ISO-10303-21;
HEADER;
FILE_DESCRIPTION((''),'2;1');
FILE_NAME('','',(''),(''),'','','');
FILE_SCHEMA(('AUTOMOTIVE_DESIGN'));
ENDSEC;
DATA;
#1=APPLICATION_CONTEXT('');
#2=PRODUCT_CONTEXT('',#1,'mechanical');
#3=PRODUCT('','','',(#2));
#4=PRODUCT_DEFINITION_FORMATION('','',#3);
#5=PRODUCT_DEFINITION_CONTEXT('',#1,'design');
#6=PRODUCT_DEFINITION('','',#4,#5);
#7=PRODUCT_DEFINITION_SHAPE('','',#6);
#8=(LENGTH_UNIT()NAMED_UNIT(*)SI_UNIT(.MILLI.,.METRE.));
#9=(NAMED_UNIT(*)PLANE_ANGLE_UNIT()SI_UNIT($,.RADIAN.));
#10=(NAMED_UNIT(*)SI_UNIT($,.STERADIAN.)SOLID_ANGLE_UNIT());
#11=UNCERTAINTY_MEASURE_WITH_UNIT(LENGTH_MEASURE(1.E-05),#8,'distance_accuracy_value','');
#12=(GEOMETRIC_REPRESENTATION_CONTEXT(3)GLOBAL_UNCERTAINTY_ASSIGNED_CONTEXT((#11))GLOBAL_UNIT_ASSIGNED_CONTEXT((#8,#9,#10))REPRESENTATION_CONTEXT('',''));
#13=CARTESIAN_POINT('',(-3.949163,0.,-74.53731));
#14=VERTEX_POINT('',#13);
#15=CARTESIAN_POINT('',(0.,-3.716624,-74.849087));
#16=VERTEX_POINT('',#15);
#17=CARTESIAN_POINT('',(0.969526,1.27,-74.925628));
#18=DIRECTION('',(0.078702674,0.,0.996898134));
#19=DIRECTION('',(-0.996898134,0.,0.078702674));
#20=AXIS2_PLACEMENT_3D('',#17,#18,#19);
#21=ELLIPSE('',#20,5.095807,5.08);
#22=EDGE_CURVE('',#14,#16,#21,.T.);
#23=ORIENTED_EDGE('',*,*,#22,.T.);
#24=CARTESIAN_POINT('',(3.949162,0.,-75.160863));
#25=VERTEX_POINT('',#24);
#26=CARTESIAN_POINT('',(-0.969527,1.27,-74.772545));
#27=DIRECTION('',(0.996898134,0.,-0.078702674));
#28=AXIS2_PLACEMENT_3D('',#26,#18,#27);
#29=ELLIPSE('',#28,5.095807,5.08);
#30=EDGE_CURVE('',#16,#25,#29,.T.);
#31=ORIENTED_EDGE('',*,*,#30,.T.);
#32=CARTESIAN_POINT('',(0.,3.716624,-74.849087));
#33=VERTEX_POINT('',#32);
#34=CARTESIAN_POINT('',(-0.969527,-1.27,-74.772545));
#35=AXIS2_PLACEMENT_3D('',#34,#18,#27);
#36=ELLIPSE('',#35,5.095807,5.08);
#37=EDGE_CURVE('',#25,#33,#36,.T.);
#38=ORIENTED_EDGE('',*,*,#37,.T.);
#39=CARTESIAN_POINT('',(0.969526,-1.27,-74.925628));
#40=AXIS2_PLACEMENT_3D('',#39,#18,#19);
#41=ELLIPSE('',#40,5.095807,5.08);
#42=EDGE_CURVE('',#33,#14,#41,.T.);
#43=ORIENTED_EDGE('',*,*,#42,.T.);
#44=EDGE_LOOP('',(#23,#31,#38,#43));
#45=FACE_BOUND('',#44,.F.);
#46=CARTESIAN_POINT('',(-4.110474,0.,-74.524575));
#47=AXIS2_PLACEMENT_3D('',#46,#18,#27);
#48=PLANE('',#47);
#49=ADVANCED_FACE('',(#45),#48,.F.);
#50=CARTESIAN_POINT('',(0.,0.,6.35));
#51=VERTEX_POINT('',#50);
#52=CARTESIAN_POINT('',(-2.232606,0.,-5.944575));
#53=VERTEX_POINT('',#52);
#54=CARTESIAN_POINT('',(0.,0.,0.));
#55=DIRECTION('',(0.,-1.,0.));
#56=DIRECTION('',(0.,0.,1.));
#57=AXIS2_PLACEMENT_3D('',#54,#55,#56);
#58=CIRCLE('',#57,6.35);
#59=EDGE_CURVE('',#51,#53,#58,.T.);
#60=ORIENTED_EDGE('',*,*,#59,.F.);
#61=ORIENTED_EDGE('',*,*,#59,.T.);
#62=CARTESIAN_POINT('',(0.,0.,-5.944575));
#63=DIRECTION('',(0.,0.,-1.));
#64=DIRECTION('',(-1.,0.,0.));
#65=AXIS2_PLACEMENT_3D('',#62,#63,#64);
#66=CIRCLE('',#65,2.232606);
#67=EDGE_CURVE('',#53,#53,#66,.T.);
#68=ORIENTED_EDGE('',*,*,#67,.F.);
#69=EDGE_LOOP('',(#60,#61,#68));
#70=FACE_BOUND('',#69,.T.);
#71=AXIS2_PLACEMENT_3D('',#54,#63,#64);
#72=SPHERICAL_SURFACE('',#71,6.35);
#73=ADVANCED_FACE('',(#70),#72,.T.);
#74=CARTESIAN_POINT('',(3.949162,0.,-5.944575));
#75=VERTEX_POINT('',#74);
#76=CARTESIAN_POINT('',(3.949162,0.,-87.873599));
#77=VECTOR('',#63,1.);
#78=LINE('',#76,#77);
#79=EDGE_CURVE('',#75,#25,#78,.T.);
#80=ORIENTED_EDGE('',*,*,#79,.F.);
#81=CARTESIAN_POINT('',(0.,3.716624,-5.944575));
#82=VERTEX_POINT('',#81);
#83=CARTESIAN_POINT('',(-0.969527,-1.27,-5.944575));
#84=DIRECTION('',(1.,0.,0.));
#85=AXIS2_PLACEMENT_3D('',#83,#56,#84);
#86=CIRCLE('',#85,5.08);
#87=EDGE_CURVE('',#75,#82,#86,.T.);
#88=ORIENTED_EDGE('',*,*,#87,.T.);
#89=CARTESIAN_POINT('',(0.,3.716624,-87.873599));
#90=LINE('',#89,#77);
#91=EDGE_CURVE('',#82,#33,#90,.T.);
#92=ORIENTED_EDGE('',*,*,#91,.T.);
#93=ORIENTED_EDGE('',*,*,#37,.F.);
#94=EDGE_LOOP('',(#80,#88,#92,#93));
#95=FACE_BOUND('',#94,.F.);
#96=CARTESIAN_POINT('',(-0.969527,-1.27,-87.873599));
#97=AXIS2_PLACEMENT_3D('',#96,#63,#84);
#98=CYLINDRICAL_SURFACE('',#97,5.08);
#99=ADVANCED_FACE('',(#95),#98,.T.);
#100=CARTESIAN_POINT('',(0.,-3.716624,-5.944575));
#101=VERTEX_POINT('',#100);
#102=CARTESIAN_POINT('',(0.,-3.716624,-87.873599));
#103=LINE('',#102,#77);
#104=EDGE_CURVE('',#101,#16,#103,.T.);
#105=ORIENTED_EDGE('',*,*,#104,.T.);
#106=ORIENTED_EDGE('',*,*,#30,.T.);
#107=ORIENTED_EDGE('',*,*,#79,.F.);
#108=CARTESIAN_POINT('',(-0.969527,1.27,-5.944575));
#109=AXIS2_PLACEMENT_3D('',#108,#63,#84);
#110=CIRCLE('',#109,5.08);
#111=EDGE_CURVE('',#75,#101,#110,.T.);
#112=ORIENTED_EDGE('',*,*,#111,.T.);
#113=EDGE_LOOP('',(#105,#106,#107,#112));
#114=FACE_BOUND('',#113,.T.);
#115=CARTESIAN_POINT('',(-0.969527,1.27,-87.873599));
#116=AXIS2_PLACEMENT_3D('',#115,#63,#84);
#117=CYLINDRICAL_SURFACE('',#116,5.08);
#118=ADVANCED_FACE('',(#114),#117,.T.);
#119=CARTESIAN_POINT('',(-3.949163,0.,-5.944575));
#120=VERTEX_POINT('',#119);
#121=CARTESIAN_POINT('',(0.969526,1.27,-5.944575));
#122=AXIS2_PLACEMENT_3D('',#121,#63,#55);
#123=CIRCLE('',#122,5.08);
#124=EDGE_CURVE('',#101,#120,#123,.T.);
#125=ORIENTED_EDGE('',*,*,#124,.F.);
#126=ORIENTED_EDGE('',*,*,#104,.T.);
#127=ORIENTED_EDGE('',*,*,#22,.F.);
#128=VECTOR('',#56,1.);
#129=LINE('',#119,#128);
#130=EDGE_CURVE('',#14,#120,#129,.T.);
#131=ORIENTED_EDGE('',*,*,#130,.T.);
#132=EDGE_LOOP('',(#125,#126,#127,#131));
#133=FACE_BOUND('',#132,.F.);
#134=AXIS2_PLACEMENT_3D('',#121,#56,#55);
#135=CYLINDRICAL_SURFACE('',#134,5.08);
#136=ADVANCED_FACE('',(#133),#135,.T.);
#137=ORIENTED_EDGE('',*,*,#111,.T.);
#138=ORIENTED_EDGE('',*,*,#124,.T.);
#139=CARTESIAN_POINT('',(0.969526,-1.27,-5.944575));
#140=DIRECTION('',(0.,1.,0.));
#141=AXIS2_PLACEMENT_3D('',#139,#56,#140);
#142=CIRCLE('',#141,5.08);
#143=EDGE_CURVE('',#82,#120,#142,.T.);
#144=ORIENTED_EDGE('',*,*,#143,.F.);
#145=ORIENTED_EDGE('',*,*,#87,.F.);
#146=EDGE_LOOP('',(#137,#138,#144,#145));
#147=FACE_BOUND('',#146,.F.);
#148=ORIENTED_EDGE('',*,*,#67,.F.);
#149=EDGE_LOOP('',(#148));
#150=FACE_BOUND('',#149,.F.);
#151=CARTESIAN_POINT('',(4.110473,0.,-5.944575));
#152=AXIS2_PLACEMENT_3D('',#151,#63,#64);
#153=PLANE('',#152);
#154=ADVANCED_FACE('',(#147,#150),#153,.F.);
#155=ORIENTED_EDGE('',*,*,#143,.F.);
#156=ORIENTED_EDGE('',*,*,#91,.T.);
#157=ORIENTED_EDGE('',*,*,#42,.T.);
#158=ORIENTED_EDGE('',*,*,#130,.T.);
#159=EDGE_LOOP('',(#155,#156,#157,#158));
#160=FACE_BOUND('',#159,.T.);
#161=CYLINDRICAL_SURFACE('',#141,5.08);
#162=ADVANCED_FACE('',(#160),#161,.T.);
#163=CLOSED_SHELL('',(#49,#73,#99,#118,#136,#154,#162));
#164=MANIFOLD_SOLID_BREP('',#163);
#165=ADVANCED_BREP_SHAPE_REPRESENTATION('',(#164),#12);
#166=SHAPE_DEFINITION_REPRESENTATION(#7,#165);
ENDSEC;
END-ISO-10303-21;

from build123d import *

# Parameters (mm, degrees)
F3_DEPTH      = 3.81
F3_DEPTH_BACK = 3.81
F4_T4_DEPTH   = 81.9290237066
F4_T9_DEPTH   = 81.9290237066
F4_T14_DEPTH  = 81.28
F4_T19_DEPTH  = 81.28


# Not quite as in the source:
# - a fillet or chamfer that OpenCascade refuses, or shapes differently, is made with other operations: its cross-section is extruded or revolved along the edge and cut away or added


with BuildPart() as f1:
    # F0 (on Front) → F1 (revolve)
    with BuildSketch(Plane.XZ):
        with BuildLine():
            Line((0, -6.35), (0, 6.35))
            ThreePointArc((0, 6.35), (-6.35, 0), (0, -6.35))
        make_face()
    revolve(axis=Axis((0, 0, 0), (0, 0, -1)))

    # F2 (on Front) → F3 (join, two sides)
    with BuildSketch(Plane.XZ) as f3_sk:
        Polygon((4.1104733182, -5.9445748625), (-4.1104737839, -5.9445748625), (-4.1104737839, -74.5245748625), (4.1104733182, -75.1735985691), align=None)
    extrude(amount=-F3_DEPTH)
    extrude(f3_sk.sketch, amount=F3_DEPTH_BACK)

    # F4: fillet of radius 5.08 on 4 edges, made by hand


with BuildPart() as f4_tool2:
    # F4_s3 → F4_t4 (new body)
    with BuildSketch(Plane.XY.offset(-87.8735985691)):
        with BuildLine():
            ThreePointArc((4.1104733182, 1.27), (2.6225757666, -2.3221024484), (-0.9695266818, -3.81))
            Line((-0.9695266818, -3.81), (-0.9695266818, -3.9116))
            Line((-0.9695266818, -3.9116), (4.2120733182, -3.9116))
            Line((4.2120733182, -3.9116), (4.2120733182, 1.27))
            Line((4.2120733182, 1.27), (4.1104733182, 1.27))
        make_face()
    extrude(amount=F4_T4_DEPTH)

    split(bisect_by=Plane(origin=(-5.8725507458, 0, -74.3854631875), x_dir=(0, 1, 0), z_dir=(0.0787026743, 0, 0.9968981337)), keep=Keep.TOP)


with BuildPart() as f1_1:
    add(f1.part)

    # F4_t1: cut F4_tool2
    add(f4_tool2.part, mode=Mode.SUBTRACT)


with BuildPart() as f4_tool7:
    # F4_s8 → F4_t9 (new body)
    with BuildSketch(Plane.XY.offset(-87.8735985691)):
        with BuildLine():
            ThreePointArc((4.1104733182, -1.27), (2.6225757666, 2.3221024484), (-0.9695266818, 3.81))
            Line((-0.9695266818, 3.81), (-0.9695266818, 3.9116))
            Line((-0.9695266818, 3.9116), (4.2120733182, 3.9116))
            Line((4.2120733182, 3.9116), (4.2120733182, -1.27))
            Line((4.2120733182, -1.27), (4.1104733182, -1.27))
        make_face()
    extrude(amount=F4_T9_DEPTH)

    split(bisect_by=Plane(origin=(-5.8725507458, 0, -74.3854631875), x_dir=(0, 1, 0), z_dir=(0.0787026743, 0, 0.9968981337)), keep=Keep.TOP)


with BuildPart() as f1_2:
    add(f1_1.part)

    # F4_t6: cut F4_tool7
    add(f4_tool7.part, mode=Mode.SUBTRACT)


with BuildPart() as f4_tool12:
    # F4_s13 → F4_t14 (new body)
    with BuildSketch(Plane.XY.offset(-5.9445748625)):
        with BuildLine():
            ThreePointArc((0.9695262161, -3.81), (-2.6225762323, -2.3221024484), (-4.1104737839, 1.27))
            Line((-4.1104737839, 1.27), (-4.2120737839, 1.27))
            Line((-4.2120737839, 1.27), (-4.2120737839, -3.9116))
            Line((-4.2120737839, -3.9116), (0.9695262161, -3.9116))
            Line((0.9695262161, -3.9116), (0.9695262161, -3.81))
        make_face()
    extrude(amount=-F4_T14_DEPTH)

    split(bisect_by=Plane(origin=(-5.8725507458, 0, -74.3854631875), x_dir=(0, 1, 0), z_dir=(0.0787026743, 0, 0.9968981337)), keep=Keep.TOP)


with BuildPart() as f1_3:
    add(f1_2.part)

    # F4_t11: cut F4_tool12
    add(f4_tool12.part, mode=Mode.SUBTRACT)


with BuildPart() as f4_tool17:
    # F4_s18 → F4_t19 (new body)
    with BuildSketch(Plane.XY.offset(-5.9445748625)):
        with BuildLine():
            ThreePointArc((0.9695262161, 3.81), (-2.6225762323, 2.3221024484), (-4.1104737839, -1.27))
            Line((-4.1104737839, -1.27), (-4.2120737839, -1.27))
            Line((-4.2120737839, -1.27), (-4.2120737839, 3.9116))
            Line((-4.2120737839, 3.9116), (0.9695262161, 3.9116))
            Line((0.9695262161, 3.9116), (0.9695262161, 3.81))
        make_face()
    extrude(amount=-F4_T19_DEPTH)

    split(bisect_by=Plane(origin=(-5.8725507458, 0, -74.3854631875), x_dir=(0, 1, 0), z_dir=(0.0787026743, 0, 0.9968981337)), keep=Keep.TOP)


with BuildPart() as f1_4:
    add(f1_3.part)

    # F4_t16: cut F4_tool17
    add(f4_tool17.part, mode=Mode.SUBTRACT)


solid = f1_4.part
